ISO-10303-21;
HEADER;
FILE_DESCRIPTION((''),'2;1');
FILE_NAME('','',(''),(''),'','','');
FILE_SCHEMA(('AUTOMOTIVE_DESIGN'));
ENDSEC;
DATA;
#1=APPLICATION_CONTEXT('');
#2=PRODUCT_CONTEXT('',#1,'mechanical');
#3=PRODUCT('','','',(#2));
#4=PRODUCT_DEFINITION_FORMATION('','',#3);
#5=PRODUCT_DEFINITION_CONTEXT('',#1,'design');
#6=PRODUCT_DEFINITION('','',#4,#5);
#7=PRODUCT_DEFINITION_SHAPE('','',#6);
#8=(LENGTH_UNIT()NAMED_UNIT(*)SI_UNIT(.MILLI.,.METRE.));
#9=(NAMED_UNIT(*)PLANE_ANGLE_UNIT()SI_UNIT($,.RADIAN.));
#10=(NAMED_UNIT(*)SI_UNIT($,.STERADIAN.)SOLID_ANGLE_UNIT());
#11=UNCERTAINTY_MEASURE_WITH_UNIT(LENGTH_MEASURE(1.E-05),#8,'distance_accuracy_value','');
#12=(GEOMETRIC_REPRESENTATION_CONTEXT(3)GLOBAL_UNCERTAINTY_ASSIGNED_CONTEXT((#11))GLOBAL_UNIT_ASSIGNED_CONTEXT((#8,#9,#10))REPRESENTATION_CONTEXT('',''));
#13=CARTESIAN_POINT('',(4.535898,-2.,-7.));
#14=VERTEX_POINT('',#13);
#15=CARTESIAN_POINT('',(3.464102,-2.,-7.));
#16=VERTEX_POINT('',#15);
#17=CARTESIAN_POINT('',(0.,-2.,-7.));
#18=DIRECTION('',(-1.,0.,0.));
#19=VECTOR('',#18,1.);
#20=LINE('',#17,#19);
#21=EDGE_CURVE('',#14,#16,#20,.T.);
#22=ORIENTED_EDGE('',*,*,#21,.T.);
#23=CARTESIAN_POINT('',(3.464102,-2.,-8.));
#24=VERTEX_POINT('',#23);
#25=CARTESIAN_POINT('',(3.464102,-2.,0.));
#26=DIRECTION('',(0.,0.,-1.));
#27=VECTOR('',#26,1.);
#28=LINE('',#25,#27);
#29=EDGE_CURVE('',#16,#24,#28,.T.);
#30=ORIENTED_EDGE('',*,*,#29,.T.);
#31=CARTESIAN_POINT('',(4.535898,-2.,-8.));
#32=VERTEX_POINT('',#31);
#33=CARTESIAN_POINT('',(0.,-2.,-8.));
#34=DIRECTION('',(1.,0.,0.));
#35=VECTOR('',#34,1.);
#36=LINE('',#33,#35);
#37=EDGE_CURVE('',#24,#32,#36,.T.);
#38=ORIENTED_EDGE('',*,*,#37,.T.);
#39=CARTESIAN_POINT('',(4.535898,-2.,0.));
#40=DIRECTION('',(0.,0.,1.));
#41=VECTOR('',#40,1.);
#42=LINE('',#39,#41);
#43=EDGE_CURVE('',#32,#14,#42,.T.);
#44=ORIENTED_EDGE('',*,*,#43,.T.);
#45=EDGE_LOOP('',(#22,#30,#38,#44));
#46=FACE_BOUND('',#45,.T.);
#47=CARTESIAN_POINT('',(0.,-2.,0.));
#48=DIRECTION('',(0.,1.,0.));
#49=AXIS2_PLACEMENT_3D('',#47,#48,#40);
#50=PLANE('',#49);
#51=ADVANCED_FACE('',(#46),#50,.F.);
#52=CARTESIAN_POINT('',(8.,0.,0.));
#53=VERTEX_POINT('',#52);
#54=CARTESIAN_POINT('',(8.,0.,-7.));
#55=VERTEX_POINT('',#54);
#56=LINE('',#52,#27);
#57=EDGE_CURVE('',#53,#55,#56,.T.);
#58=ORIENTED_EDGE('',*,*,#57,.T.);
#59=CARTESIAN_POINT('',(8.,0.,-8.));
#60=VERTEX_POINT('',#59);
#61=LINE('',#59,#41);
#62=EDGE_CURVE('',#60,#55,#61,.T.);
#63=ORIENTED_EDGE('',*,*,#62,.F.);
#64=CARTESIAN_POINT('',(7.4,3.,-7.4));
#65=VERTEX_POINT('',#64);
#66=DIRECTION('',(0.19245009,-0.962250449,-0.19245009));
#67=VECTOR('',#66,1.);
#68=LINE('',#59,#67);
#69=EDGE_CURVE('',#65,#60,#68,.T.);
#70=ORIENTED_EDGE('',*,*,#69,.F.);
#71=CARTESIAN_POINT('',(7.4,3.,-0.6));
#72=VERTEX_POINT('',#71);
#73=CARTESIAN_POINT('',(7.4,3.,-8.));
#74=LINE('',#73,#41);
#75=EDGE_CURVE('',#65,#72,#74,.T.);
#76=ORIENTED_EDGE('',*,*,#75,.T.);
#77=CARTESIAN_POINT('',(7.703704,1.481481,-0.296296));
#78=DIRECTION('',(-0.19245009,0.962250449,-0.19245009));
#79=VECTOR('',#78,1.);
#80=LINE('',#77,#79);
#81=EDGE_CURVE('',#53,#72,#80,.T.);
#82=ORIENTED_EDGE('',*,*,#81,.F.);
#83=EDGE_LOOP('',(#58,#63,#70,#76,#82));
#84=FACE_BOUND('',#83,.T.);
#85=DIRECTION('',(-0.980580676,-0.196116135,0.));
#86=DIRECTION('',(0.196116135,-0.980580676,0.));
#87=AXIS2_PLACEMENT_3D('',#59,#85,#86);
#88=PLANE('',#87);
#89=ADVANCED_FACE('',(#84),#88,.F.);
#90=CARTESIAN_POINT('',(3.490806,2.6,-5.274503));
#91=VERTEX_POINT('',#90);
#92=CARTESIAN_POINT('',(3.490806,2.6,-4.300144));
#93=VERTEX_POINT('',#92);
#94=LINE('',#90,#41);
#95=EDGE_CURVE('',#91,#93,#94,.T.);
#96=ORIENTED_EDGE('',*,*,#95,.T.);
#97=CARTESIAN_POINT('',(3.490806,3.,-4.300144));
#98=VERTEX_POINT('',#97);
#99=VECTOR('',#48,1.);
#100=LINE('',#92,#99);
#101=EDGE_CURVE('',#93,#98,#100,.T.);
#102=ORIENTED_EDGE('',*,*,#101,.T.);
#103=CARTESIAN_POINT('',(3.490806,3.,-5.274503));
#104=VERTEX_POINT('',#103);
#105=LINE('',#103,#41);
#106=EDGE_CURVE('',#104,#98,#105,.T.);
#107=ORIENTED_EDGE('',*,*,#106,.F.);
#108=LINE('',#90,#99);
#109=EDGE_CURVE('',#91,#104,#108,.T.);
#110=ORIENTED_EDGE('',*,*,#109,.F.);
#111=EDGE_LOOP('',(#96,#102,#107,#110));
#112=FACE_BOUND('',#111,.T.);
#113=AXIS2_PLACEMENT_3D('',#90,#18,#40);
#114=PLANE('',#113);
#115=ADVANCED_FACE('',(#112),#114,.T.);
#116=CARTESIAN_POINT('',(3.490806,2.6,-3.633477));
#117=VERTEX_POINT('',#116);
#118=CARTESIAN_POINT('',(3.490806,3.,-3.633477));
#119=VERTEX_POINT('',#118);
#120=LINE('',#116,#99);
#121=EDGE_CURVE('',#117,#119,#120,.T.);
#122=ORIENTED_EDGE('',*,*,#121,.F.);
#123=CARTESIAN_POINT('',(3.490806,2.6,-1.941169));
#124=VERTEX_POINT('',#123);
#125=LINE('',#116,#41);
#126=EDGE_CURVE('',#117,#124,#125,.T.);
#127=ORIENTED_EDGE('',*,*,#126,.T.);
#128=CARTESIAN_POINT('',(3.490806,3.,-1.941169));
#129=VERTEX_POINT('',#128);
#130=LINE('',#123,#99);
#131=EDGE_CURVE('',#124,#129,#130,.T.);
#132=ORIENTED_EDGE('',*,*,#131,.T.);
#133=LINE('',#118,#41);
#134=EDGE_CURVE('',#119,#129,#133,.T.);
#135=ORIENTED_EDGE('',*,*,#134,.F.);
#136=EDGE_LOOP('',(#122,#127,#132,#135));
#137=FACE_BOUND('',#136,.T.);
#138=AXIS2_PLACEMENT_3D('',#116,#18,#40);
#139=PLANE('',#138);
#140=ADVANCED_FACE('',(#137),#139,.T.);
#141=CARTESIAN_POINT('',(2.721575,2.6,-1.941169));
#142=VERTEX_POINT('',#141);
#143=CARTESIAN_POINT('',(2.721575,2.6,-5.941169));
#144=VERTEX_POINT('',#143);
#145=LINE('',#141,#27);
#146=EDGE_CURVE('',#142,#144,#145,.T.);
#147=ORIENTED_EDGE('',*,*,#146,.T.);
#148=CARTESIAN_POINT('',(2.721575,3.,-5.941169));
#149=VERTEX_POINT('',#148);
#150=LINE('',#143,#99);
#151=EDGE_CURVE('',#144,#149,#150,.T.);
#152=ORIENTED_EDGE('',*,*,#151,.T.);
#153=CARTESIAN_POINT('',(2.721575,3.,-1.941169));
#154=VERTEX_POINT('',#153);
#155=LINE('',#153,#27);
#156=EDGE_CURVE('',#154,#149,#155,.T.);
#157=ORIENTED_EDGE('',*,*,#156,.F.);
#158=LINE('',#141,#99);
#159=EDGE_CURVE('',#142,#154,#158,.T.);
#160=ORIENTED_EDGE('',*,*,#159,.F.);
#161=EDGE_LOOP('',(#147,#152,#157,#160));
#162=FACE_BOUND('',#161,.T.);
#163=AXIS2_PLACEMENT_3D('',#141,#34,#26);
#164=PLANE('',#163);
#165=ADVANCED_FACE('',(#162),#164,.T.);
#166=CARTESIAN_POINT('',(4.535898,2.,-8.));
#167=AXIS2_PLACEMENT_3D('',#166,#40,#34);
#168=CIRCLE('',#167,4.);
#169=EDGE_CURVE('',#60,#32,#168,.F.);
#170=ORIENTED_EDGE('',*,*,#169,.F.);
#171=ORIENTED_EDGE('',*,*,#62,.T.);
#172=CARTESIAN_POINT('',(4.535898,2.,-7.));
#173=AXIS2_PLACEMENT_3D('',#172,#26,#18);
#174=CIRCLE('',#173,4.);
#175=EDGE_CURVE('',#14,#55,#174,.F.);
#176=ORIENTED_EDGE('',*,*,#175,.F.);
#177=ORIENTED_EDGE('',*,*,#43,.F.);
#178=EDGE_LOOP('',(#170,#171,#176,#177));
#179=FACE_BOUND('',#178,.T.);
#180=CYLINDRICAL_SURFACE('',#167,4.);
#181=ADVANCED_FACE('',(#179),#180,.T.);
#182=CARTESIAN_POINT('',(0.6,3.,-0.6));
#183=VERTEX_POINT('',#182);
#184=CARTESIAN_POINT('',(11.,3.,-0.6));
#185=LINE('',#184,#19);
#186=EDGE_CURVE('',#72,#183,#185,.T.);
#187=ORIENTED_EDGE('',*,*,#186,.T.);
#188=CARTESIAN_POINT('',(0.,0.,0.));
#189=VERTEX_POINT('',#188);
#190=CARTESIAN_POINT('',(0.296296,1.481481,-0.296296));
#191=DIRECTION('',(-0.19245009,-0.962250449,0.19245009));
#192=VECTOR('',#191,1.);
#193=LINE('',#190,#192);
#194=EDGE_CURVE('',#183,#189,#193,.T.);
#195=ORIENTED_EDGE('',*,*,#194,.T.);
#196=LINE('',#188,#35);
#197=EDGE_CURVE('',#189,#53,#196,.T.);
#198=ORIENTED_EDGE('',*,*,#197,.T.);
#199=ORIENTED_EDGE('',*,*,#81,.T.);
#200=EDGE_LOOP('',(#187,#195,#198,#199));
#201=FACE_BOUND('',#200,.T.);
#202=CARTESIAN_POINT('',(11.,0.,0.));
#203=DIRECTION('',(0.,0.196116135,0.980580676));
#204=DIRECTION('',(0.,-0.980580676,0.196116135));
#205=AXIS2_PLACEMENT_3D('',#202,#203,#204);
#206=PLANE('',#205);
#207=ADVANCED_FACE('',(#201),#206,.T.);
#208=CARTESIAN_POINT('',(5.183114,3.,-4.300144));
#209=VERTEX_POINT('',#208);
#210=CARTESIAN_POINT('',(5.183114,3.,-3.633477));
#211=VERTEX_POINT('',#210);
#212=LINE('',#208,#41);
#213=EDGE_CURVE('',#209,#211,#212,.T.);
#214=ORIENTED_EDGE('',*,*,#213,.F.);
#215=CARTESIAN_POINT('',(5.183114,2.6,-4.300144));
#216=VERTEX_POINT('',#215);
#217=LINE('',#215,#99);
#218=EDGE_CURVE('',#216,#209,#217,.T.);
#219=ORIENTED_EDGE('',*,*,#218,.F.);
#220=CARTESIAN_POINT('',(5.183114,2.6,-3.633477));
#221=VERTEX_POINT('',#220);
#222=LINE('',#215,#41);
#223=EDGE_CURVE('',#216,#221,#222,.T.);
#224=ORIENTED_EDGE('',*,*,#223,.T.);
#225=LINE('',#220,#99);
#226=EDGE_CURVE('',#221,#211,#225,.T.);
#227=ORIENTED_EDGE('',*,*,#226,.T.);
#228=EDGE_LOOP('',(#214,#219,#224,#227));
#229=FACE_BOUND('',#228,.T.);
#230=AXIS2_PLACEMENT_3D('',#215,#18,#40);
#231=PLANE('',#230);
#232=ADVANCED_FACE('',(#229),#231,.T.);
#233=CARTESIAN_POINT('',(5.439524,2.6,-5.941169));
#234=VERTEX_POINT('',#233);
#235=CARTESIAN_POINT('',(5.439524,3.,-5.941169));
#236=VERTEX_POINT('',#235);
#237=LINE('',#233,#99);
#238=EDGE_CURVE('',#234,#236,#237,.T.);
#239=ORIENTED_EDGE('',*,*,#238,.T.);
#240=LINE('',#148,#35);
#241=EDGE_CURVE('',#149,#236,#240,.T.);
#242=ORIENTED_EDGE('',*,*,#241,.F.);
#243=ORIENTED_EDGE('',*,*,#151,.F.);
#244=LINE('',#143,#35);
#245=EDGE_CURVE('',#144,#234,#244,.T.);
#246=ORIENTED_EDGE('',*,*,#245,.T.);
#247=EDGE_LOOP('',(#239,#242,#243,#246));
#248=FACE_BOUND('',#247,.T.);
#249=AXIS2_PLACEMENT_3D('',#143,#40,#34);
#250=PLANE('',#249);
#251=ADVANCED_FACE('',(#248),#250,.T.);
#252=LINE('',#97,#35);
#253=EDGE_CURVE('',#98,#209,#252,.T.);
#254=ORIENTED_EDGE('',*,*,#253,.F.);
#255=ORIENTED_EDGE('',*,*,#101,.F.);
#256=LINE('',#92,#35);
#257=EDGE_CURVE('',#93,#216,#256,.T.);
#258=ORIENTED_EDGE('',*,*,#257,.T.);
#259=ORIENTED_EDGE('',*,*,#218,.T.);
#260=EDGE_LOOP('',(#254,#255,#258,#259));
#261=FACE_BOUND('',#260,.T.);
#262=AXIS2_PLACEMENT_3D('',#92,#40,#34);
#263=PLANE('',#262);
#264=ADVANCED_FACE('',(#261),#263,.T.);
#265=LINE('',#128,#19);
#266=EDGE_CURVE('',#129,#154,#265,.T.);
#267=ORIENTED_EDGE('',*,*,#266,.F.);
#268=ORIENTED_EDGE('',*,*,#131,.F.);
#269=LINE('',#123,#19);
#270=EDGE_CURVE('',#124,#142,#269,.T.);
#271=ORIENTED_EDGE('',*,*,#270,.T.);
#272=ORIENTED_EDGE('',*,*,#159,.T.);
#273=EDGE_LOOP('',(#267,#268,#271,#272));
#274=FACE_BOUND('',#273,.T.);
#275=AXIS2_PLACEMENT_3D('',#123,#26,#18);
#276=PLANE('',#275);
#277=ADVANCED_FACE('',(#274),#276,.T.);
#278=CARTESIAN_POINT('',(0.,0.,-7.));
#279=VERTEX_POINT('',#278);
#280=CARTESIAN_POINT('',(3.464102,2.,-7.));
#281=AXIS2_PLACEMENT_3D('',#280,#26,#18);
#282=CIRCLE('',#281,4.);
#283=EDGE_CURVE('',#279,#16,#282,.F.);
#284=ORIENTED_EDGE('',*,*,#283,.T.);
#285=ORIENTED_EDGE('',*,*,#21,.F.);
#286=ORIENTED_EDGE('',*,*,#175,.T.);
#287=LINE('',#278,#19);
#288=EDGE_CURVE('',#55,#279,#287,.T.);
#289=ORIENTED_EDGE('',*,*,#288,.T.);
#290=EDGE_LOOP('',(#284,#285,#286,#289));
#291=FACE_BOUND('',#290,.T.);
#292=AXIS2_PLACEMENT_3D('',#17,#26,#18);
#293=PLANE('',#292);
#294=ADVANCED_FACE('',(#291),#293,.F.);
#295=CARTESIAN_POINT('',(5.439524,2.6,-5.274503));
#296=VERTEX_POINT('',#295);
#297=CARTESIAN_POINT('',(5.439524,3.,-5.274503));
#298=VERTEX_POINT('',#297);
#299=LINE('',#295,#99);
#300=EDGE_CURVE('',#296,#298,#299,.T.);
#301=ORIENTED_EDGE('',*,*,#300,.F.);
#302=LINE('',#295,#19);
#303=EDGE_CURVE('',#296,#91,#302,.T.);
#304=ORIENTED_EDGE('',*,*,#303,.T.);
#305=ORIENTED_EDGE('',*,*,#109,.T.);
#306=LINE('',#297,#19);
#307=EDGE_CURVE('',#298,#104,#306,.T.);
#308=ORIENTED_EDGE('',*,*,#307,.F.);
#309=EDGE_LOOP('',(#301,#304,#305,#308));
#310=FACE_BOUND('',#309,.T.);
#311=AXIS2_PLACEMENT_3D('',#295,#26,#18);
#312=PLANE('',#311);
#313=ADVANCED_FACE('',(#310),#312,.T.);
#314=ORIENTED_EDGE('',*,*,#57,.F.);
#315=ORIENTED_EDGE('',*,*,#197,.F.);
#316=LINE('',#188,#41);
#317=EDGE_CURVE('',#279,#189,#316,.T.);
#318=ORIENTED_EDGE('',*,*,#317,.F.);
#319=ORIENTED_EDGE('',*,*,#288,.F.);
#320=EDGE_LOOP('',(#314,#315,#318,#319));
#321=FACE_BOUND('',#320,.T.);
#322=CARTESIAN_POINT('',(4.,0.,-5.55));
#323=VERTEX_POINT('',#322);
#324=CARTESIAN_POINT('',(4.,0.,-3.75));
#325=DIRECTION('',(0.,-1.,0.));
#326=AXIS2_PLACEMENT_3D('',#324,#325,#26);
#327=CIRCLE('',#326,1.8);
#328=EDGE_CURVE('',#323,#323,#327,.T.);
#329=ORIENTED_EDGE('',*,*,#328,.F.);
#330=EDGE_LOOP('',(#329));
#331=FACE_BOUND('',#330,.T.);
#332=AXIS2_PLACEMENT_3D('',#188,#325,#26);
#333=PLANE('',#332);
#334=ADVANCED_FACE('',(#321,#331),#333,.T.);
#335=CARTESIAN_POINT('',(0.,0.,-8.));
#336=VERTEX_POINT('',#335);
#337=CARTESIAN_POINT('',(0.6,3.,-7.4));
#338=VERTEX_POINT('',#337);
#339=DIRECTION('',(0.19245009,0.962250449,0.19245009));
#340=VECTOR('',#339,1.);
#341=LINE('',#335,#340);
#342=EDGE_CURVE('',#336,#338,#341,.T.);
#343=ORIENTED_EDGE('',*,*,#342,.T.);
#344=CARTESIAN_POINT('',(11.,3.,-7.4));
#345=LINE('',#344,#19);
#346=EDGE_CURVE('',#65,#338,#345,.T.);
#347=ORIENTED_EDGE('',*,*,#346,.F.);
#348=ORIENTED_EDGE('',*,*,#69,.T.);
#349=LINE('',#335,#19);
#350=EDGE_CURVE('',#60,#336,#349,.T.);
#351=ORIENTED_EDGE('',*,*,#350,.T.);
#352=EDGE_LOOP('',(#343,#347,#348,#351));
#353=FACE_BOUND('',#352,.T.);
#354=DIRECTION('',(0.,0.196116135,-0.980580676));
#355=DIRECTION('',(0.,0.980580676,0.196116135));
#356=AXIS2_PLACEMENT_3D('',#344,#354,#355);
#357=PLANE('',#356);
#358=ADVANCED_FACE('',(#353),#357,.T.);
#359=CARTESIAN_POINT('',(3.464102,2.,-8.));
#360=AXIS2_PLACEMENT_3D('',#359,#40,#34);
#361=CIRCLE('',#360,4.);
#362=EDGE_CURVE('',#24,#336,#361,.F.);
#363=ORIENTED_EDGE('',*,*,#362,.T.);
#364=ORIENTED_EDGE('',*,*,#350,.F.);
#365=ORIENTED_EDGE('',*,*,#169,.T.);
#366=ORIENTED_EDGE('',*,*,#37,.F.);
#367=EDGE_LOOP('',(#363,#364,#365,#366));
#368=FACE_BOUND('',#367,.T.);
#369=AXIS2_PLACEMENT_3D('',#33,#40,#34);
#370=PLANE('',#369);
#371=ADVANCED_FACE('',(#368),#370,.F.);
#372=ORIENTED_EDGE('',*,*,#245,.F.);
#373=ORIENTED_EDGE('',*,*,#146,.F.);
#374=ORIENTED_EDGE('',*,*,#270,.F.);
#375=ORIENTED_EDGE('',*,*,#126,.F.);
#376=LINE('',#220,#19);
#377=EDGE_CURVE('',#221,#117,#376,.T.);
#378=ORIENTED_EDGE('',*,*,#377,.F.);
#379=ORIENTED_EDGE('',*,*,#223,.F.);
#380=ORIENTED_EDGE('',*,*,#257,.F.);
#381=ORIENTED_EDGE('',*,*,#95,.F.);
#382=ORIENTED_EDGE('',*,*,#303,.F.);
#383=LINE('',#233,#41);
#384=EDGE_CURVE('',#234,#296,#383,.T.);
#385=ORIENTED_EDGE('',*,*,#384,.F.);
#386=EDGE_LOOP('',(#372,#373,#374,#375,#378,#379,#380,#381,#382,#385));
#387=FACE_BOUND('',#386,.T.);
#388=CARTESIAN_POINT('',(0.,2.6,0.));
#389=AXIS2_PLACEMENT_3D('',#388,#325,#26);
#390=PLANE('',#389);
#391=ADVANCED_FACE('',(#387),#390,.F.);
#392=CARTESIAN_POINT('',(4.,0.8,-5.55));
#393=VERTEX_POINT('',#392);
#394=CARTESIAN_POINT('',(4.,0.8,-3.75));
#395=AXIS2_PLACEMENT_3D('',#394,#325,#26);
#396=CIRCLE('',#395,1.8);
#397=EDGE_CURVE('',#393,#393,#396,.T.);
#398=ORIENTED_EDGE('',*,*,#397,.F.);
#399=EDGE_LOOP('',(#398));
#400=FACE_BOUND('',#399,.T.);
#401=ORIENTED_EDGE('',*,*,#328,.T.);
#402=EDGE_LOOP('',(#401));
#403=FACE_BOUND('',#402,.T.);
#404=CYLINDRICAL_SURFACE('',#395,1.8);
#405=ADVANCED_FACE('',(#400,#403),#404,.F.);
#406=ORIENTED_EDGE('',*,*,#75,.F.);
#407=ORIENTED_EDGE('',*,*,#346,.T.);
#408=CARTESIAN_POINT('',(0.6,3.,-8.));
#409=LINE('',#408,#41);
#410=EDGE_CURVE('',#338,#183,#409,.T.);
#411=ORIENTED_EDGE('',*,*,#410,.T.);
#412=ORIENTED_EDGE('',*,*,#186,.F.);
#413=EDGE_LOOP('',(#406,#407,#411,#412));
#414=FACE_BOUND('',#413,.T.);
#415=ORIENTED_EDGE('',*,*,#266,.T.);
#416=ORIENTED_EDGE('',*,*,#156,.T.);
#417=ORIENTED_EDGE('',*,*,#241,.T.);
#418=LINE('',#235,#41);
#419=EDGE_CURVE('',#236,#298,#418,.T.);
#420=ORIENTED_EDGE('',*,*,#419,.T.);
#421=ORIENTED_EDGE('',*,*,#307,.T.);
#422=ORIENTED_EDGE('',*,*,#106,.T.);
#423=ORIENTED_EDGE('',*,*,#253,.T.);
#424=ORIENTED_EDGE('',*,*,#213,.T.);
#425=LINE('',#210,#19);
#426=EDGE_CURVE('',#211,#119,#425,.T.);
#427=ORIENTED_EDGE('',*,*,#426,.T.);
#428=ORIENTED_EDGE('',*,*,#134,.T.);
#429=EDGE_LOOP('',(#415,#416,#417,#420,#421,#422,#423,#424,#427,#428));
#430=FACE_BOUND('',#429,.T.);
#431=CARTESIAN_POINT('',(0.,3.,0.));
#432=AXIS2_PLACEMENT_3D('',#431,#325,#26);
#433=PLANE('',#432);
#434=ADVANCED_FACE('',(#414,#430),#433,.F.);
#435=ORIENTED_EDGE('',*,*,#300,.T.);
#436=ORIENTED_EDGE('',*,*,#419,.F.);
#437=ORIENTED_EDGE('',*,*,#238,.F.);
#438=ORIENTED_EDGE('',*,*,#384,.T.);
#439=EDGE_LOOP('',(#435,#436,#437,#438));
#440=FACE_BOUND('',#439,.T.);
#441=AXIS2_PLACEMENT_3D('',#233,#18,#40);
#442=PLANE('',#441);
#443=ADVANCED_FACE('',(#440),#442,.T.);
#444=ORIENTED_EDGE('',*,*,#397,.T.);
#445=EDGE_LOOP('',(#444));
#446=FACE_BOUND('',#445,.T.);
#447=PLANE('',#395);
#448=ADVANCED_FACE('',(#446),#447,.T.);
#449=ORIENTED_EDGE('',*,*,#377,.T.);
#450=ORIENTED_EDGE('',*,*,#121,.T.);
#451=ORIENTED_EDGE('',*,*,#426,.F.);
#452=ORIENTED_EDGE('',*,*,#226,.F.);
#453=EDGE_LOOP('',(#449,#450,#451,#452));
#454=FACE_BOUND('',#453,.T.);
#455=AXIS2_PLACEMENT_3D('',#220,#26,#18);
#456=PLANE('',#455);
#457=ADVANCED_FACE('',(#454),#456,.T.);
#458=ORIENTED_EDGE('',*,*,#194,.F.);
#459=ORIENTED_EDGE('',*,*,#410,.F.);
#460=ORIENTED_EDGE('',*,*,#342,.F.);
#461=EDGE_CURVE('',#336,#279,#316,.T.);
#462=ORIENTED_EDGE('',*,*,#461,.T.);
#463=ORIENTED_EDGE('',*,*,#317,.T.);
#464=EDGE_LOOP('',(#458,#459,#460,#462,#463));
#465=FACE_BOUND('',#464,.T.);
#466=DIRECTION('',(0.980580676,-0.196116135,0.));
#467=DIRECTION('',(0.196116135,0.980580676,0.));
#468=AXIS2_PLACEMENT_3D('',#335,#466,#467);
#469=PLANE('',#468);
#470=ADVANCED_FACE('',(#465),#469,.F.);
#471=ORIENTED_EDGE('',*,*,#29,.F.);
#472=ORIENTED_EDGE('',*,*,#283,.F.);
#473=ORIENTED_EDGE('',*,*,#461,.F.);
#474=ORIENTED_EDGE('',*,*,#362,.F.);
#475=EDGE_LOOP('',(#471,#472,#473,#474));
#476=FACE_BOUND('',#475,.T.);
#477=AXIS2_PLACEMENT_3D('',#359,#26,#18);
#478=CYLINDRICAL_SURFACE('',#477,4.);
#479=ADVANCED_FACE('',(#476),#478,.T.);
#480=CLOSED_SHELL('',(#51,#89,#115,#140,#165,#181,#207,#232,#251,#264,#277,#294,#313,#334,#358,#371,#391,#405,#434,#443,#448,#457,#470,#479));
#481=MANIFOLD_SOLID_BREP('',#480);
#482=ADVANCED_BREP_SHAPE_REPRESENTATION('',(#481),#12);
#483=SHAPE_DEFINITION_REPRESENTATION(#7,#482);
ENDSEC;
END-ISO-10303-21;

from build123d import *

# Parameters (mm, degrees)
SKETCH1_W               = 8
SKETCH1_H               = 8
BOSS_EXTRUDE1_DEPTH     = 3
CUT_EXTRUDE1_DEPTH      = 12.704699911
CUT_EXTRUDE1_DEPTH_BACK = 12.704699911
CUT_EXTRUDE2_DEPTH      = 11
SKETCH4_R               = 1.8
CUT_EXTRUDE3_DEPTH      = 0.8
SKETCH5_W               = 8
SKETCH5_H               = 1
BOSS_EXTRUDE2_DEPTH     = 2
FILLET1_R               = 4
CUT_EXTRUDE4_DEPTH      = 0.4


with BuildPart() as part:
    # Sketch1 → Boss-Extrude1 (new body)
    with BuildSketch(Plane(origin=(0, 0, 0), x_dir=(1, 0, 0), z_dir=(0, 1, 0))):
        with Locations((4, 4)):
            Rectangle(SKETCH1_W, SKETCH1_H)
    extrude(amount=BOSS_EXTRUDE1_DEPTH)

    # Sketch2 → Cut-Extrude1 (cut, two sides: drawn at the far end of the back side and taken through both)
    with BuildSketch(Plane.XY.offset(-CUT_EXTRUDE1_DEPTH_BACK)):
        Polygon((0, 0), (0.6, 3), (0, 3), align=None)
        Polygon((8, 0), (7.4, 3), (8, 3), align=None)
    extrude(amount=CUT_EXTRUDE1_DEPTH + CUT_EXTRUDE1_DEPTH_BACK, mode=Mode.SUBTRACT)

    # Sketch3 → Cut-Extrude2 (cut)
    with BuildSketch(Plane(origin=(0, 0, 0), x_dir=(0, 0, -1), z_dir=(1, 0, 0))):
        Polygon((0, 0), (0.6, 3), (0, 3), align=None)
        Polygon((8, 3), (7.4, 3), (8, 0), align=None)
    extrude(amount=CUT_EXTRUDE2_DEPTH, mode=Mode.SUBTRACT)

    # Sketch4 → Cut-Extrude3 (cut)
    with BuildSketch(Plane.XZ):
        with Locations(Location((4, -3.75, 0), (0, 0, 270))):
            Circle(SKETCH4_R)
    extrude(amount=-CUT_EXTRUDE3_DEPTH, mode=Mode.SUBTRACT)

    # Sketch5 → Boss-Extrude2 (add)
    with BuildSketch(Plane.XZ):
        with Locations((4, -7.5)):
            Rectangle(SKETCH5_W, SKETCH5_H)
    extrude(amount=BOSS_EXTRUDE2_DEPTH)

    # Fillet1
    # the kernel refuses this fillet: 4 mm, written as the material it takes off along each edge
    with BuildSketch(Plane(origin=(8, -2, -16.660254038), x_dir=(0, 1, 0), z_dir=(0, 0, 1)), Plane(origin=(0, -2, 1.660254038), x_dir=(0, 1, 0), z_dir=(0, 0, -1))) as fillet1_piece_1:
        with BuildLine():
            CenterArc((4, 3.464101615), FILLET1_R, 180, 60)
            Line((0, 3.464101615), (-0.08, 3.464101615))
            Line((-0.08, 3.464101615), (-0.08, 0))
            Line((-0.08, 0), (0, -0.08))
            ThreePointArc((0, -0.08), (1, -0.08), (1.96, -0.069282032))
            Line((1.96, -0.069282032), (2, 0))
        make_face()
    extrude(amount=18.320508076, mode=Mode.SUBTRACT)

    # Sketch6 → Cut-Extrude4 (cut)
    with BuildSketch(Plane(origin=(0, 3, 0), x_dir=(1, 0, 0), z_dir=(0, 1, 0))):
        Polygon((2.721575188, 1.941169366), (2.721575188, 5.941169366), (5.439523906, 5.941169366), (5.439523906, 5.2745027), (3.490805957, 5.2745027), (3.490805957, 4.300143725), (5.18311365, 4.300143725), (5.18311365, 3.633477059), (3.490805957, 3.633477059), (3.490805957, 1.941169366), align=None)
    extrude(amount=-CUT_EXTRUDE4_DEPTH, mode=Mode.SUBTRACT)


solid = part.part
